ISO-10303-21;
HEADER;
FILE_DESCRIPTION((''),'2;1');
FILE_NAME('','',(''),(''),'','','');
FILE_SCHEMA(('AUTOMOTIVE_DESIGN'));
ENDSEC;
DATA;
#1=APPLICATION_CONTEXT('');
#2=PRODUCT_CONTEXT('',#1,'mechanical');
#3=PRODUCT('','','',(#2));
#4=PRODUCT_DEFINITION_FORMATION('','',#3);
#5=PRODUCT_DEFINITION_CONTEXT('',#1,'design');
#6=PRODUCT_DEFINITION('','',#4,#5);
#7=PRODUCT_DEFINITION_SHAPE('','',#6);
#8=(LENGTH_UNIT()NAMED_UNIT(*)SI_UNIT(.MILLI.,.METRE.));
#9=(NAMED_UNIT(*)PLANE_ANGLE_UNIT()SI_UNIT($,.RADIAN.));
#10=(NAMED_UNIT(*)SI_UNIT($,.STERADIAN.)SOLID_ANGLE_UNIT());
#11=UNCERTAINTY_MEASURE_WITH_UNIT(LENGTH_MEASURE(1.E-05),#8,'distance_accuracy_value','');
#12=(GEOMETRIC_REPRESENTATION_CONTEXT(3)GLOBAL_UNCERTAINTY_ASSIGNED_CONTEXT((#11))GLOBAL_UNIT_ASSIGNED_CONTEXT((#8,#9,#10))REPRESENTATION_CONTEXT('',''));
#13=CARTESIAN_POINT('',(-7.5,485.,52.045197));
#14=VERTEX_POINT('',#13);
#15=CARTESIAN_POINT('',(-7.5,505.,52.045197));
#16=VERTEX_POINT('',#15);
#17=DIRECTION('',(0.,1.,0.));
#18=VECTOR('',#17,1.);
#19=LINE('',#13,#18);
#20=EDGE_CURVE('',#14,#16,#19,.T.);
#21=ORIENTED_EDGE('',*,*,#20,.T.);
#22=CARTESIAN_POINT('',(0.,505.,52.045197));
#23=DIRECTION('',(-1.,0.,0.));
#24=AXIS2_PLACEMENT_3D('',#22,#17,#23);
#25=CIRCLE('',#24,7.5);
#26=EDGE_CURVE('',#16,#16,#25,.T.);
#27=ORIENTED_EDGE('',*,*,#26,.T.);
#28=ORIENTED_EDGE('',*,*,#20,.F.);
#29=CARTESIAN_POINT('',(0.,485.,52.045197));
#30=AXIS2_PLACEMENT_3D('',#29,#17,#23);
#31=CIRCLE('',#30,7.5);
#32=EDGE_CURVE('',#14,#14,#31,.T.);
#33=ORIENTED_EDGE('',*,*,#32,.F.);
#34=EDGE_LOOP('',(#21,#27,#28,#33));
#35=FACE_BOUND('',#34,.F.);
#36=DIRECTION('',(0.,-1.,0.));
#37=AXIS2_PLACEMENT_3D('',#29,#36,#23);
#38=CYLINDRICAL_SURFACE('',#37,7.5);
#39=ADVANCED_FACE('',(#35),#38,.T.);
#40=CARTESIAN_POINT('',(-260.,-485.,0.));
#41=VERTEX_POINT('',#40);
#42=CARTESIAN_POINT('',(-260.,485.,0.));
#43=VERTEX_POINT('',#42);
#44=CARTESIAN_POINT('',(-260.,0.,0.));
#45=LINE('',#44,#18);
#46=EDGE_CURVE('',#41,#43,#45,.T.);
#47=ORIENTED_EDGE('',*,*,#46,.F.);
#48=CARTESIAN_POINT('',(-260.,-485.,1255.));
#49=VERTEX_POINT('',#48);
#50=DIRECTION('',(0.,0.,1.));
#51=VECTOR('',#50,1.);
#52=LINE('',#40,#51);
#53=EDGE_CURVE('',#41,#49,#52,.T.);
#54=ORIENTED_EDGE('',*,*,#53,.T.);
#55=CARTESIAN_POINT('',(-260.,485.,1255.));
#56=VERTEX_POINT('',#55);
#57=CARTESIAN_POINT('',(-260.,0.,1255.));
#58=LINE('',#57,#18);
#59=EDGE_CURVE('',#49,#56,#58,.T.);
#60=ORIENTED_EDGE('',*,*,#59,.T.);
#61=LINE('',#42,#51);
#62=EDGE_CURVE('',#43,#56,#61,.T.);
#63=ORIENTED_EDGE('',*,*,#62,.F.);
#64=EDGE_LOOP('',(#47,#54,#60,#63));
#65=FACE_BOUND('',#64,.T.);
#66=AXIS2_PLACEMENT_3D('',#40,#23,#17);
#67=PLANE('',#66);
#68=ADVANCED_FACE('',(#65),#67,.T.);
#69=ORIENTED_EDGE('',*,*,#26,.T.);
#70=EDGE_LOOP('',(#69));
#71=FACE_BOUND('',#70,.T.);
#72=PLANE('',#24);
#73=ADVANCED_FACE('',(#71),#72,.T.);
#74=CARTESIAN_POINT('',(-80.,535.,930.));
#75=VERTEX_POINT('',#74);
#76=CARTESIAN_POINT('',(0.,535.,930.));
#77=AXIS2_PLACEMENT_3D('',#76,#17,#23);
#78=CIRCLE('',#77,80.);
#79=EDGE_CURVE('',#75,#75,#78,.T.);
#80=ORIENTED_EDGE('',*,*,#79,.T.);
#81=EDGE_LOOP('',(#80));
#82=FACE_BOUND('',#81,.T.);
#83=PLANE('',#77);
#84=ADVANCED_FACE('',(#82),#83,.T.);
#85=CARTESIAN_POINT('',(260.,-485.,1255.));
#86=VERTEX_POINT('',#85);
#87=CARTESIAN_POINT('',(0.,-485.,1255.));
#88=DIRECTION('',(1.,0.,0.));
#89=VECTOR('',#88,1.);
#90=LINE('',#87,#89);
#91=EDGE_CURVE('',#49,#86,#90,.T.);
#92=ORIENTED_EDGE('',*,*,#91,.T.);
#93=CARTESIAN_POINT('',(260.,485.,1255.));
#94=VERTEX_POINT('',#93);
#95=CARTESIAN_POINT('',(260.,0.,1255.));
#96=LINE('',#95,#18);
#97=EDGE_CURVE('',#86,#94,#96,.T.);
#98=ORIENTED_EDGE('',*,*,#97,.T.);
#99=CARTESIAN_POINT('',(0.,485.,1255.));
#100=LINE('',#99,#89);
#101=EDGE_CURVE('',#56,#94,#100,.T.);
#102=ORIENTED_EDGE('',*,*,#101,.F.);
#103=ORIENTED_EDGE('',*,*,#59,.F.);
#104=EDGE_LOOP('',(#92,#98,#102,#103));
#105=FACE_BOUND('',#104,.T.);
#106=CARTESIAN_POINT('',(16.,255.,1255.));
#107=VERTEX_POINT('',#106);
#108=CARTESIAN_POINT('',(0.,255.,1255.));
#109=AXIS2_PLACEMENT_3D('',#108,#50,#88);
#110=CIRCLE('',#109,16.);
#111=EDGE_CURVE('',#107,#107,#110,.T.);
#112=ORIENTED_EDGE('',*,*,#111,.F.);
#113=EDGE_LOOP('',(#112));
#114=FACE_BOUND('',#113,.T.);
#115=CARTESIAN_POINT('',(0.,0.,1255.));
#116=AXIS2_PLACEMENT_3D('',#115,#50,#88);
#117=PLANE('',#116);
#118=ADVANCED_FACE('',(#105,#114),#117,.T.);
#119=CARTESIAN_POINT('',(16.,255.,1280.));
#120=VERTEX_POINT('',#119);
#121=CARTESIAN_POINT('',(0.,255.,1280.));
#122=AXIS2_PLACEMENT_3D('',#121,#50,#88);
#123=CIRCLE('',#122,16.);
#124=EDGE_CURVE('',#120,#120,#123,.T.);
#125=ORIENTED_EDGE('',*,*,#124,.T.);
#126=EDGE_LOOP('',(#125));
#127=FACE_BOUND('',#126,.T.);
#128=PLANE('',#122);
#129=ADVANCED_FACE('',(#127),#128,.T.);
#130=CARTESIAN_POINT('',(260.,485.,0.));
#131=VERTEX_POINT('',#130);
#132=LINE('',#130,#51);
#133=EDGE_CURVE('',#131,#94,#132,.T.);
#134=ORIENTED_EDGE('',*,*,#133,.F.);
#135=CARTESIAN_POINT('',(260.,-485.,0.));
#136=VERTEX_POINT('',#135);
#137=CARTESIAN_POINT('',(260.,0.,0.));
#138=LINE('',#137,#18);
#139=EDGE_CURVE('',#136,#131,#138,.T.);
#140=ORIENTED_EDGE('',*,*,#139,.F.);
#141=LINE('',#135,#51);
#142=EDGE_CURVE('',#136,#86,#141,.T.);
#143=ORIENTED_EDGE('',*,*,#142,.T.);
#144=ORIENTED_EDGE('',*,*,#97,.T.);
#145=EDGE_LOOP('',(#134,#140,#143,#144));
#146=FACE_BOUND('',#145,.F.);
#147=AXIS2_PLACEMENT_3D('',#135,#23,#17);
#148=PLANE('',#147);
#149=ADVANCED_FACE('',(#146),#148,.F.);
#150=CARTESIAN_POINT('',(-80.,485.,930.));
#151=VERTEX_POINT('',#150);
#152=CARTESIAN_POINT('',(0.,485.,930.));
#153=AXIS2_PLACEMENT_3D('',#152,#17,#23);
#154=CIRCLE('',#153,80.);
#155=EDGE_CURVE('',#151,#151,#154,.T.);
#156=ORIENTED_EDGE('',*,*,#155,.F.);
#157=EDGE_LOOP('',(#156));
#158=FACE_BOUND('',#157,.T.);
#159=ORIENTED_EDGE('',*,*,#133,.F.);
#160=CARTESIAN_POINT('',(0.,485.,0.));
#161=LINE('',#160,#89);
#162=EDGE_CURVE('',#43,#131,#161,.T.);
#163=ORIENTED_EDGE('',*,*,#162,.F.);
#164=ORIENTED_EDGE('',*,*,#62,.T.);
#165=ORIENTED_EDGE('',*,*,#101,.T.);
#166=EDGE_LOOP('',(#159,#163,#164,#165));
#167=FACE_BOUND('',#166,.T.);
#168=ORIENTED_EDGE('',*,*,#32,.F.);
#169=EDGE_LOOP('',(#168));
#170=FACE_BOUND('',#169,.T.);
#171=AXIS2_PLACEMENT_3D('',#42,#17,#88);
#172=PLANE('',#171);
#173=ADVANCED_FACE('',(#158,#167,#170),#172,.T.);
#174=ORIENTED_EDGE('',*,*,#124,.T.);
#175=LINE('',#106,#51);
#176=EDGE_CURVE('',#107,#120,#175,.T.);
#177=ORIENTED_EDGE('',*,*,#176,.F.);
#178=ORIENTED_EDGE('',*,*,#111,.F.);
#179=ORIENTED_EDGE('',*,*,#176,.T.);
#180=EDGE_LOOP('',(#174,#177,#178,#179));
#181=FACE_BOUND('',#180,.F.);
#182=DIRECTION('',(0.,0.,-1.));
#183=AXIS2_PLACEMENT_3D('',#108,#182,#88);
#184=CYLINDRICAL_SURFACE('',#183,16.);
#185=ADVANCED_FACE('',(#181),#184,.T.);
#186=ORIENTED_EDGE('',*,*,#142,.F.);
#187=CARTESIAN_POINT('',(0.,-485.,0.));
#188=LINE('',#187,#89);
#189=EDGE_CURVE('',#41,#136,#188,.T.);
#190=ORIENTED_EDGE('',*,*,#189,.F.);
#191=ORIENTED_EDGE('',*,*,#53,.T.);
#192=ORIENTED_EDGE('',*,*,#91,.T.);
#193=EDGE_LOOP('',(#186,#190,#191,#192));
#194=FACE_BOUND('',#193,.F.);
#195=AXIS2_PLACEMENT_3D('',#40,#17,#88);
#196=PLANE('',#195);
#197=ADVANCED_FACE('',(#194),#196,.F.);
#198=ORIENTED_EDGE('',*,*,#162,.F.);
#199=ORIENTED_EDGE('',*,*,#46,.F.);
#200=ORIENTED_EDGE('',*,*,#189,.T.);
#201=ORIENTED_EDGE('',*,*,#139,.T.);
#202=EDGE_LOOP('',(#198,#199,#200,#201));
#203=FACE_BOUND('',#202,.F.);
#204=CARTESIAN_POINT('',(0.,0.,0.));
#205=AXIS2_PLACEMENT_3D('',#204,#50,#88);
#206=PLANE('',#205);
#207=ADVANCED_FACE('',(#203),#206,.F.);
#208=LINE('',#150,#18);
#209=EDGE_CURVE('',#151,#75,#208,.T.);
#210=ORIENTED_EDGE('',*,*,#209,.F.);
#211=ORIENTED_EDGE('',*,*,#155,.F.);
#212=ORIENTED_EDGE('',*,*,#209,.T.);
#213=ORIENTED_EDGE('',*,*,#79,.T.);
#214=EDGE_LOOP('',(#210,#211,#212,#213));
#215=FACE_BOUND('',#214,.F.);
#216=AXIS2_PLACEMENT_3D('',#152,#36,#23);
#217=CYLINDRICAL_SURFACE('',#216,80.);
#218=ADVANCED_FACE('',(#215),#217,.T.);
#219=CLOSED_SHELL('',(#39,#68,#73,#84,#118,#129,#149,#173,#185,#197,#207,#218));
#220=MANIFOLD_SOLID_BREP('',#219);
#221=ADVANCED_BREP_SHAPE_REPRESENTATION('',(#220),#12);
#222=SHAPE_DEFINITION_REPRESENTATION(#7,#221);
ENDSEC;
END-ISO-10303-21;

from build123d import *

# Parameters (mm, degrees)
F0_W     = 520
F0_H     = 970
F1_DEPTH = 1255
F2_R     = 80
F3_DEPTH = 50
F5_R     = 7.5
F6_DEPTH = 20
F7_R     = 16
F8_DEPTH = 25


# Not quite as in the source:
# - the program builds the solid bodies; features that only make, move or delete a surface that nothing else refers to are left out


with BuildPart() as f1:
    # F0 (on Top) → F1 (new body)
    with BuildSketch(Plane.XY):
        Rectangle(F0_W, F0_H)
    extrude(amount=F1_DEPTH)

    # F2 (on face) → F3 (join)
    with BuildSketch(Plane(origin=(0, 485, 0), x_dir=(-1, 0, 0), z_dir=(0, 1, 0))):
        with Locations((0, 930)):
            Circle(F2_R)
    extrude(amount=F3_DEPTH)

    # F5 (on face) → F6 (join)
    with BuildSketch(Plane(origin=(0, 485, 0), x_dir=(-1, 0, 0), z_dir=(0, 1, 0))):
        with Locations((0, 52.045196724)):
            Circle(F5_R)
    extrude(amount=F6_DEPTH)

    # F7 (on face) → F8 (join)
    with BuildSketch(Plane.XY.offset(1255)):
        with Locations((0, 255)):
            Circle(F7_R)
    extrude(amount=F8_DEPTH)


solid = f1.part
